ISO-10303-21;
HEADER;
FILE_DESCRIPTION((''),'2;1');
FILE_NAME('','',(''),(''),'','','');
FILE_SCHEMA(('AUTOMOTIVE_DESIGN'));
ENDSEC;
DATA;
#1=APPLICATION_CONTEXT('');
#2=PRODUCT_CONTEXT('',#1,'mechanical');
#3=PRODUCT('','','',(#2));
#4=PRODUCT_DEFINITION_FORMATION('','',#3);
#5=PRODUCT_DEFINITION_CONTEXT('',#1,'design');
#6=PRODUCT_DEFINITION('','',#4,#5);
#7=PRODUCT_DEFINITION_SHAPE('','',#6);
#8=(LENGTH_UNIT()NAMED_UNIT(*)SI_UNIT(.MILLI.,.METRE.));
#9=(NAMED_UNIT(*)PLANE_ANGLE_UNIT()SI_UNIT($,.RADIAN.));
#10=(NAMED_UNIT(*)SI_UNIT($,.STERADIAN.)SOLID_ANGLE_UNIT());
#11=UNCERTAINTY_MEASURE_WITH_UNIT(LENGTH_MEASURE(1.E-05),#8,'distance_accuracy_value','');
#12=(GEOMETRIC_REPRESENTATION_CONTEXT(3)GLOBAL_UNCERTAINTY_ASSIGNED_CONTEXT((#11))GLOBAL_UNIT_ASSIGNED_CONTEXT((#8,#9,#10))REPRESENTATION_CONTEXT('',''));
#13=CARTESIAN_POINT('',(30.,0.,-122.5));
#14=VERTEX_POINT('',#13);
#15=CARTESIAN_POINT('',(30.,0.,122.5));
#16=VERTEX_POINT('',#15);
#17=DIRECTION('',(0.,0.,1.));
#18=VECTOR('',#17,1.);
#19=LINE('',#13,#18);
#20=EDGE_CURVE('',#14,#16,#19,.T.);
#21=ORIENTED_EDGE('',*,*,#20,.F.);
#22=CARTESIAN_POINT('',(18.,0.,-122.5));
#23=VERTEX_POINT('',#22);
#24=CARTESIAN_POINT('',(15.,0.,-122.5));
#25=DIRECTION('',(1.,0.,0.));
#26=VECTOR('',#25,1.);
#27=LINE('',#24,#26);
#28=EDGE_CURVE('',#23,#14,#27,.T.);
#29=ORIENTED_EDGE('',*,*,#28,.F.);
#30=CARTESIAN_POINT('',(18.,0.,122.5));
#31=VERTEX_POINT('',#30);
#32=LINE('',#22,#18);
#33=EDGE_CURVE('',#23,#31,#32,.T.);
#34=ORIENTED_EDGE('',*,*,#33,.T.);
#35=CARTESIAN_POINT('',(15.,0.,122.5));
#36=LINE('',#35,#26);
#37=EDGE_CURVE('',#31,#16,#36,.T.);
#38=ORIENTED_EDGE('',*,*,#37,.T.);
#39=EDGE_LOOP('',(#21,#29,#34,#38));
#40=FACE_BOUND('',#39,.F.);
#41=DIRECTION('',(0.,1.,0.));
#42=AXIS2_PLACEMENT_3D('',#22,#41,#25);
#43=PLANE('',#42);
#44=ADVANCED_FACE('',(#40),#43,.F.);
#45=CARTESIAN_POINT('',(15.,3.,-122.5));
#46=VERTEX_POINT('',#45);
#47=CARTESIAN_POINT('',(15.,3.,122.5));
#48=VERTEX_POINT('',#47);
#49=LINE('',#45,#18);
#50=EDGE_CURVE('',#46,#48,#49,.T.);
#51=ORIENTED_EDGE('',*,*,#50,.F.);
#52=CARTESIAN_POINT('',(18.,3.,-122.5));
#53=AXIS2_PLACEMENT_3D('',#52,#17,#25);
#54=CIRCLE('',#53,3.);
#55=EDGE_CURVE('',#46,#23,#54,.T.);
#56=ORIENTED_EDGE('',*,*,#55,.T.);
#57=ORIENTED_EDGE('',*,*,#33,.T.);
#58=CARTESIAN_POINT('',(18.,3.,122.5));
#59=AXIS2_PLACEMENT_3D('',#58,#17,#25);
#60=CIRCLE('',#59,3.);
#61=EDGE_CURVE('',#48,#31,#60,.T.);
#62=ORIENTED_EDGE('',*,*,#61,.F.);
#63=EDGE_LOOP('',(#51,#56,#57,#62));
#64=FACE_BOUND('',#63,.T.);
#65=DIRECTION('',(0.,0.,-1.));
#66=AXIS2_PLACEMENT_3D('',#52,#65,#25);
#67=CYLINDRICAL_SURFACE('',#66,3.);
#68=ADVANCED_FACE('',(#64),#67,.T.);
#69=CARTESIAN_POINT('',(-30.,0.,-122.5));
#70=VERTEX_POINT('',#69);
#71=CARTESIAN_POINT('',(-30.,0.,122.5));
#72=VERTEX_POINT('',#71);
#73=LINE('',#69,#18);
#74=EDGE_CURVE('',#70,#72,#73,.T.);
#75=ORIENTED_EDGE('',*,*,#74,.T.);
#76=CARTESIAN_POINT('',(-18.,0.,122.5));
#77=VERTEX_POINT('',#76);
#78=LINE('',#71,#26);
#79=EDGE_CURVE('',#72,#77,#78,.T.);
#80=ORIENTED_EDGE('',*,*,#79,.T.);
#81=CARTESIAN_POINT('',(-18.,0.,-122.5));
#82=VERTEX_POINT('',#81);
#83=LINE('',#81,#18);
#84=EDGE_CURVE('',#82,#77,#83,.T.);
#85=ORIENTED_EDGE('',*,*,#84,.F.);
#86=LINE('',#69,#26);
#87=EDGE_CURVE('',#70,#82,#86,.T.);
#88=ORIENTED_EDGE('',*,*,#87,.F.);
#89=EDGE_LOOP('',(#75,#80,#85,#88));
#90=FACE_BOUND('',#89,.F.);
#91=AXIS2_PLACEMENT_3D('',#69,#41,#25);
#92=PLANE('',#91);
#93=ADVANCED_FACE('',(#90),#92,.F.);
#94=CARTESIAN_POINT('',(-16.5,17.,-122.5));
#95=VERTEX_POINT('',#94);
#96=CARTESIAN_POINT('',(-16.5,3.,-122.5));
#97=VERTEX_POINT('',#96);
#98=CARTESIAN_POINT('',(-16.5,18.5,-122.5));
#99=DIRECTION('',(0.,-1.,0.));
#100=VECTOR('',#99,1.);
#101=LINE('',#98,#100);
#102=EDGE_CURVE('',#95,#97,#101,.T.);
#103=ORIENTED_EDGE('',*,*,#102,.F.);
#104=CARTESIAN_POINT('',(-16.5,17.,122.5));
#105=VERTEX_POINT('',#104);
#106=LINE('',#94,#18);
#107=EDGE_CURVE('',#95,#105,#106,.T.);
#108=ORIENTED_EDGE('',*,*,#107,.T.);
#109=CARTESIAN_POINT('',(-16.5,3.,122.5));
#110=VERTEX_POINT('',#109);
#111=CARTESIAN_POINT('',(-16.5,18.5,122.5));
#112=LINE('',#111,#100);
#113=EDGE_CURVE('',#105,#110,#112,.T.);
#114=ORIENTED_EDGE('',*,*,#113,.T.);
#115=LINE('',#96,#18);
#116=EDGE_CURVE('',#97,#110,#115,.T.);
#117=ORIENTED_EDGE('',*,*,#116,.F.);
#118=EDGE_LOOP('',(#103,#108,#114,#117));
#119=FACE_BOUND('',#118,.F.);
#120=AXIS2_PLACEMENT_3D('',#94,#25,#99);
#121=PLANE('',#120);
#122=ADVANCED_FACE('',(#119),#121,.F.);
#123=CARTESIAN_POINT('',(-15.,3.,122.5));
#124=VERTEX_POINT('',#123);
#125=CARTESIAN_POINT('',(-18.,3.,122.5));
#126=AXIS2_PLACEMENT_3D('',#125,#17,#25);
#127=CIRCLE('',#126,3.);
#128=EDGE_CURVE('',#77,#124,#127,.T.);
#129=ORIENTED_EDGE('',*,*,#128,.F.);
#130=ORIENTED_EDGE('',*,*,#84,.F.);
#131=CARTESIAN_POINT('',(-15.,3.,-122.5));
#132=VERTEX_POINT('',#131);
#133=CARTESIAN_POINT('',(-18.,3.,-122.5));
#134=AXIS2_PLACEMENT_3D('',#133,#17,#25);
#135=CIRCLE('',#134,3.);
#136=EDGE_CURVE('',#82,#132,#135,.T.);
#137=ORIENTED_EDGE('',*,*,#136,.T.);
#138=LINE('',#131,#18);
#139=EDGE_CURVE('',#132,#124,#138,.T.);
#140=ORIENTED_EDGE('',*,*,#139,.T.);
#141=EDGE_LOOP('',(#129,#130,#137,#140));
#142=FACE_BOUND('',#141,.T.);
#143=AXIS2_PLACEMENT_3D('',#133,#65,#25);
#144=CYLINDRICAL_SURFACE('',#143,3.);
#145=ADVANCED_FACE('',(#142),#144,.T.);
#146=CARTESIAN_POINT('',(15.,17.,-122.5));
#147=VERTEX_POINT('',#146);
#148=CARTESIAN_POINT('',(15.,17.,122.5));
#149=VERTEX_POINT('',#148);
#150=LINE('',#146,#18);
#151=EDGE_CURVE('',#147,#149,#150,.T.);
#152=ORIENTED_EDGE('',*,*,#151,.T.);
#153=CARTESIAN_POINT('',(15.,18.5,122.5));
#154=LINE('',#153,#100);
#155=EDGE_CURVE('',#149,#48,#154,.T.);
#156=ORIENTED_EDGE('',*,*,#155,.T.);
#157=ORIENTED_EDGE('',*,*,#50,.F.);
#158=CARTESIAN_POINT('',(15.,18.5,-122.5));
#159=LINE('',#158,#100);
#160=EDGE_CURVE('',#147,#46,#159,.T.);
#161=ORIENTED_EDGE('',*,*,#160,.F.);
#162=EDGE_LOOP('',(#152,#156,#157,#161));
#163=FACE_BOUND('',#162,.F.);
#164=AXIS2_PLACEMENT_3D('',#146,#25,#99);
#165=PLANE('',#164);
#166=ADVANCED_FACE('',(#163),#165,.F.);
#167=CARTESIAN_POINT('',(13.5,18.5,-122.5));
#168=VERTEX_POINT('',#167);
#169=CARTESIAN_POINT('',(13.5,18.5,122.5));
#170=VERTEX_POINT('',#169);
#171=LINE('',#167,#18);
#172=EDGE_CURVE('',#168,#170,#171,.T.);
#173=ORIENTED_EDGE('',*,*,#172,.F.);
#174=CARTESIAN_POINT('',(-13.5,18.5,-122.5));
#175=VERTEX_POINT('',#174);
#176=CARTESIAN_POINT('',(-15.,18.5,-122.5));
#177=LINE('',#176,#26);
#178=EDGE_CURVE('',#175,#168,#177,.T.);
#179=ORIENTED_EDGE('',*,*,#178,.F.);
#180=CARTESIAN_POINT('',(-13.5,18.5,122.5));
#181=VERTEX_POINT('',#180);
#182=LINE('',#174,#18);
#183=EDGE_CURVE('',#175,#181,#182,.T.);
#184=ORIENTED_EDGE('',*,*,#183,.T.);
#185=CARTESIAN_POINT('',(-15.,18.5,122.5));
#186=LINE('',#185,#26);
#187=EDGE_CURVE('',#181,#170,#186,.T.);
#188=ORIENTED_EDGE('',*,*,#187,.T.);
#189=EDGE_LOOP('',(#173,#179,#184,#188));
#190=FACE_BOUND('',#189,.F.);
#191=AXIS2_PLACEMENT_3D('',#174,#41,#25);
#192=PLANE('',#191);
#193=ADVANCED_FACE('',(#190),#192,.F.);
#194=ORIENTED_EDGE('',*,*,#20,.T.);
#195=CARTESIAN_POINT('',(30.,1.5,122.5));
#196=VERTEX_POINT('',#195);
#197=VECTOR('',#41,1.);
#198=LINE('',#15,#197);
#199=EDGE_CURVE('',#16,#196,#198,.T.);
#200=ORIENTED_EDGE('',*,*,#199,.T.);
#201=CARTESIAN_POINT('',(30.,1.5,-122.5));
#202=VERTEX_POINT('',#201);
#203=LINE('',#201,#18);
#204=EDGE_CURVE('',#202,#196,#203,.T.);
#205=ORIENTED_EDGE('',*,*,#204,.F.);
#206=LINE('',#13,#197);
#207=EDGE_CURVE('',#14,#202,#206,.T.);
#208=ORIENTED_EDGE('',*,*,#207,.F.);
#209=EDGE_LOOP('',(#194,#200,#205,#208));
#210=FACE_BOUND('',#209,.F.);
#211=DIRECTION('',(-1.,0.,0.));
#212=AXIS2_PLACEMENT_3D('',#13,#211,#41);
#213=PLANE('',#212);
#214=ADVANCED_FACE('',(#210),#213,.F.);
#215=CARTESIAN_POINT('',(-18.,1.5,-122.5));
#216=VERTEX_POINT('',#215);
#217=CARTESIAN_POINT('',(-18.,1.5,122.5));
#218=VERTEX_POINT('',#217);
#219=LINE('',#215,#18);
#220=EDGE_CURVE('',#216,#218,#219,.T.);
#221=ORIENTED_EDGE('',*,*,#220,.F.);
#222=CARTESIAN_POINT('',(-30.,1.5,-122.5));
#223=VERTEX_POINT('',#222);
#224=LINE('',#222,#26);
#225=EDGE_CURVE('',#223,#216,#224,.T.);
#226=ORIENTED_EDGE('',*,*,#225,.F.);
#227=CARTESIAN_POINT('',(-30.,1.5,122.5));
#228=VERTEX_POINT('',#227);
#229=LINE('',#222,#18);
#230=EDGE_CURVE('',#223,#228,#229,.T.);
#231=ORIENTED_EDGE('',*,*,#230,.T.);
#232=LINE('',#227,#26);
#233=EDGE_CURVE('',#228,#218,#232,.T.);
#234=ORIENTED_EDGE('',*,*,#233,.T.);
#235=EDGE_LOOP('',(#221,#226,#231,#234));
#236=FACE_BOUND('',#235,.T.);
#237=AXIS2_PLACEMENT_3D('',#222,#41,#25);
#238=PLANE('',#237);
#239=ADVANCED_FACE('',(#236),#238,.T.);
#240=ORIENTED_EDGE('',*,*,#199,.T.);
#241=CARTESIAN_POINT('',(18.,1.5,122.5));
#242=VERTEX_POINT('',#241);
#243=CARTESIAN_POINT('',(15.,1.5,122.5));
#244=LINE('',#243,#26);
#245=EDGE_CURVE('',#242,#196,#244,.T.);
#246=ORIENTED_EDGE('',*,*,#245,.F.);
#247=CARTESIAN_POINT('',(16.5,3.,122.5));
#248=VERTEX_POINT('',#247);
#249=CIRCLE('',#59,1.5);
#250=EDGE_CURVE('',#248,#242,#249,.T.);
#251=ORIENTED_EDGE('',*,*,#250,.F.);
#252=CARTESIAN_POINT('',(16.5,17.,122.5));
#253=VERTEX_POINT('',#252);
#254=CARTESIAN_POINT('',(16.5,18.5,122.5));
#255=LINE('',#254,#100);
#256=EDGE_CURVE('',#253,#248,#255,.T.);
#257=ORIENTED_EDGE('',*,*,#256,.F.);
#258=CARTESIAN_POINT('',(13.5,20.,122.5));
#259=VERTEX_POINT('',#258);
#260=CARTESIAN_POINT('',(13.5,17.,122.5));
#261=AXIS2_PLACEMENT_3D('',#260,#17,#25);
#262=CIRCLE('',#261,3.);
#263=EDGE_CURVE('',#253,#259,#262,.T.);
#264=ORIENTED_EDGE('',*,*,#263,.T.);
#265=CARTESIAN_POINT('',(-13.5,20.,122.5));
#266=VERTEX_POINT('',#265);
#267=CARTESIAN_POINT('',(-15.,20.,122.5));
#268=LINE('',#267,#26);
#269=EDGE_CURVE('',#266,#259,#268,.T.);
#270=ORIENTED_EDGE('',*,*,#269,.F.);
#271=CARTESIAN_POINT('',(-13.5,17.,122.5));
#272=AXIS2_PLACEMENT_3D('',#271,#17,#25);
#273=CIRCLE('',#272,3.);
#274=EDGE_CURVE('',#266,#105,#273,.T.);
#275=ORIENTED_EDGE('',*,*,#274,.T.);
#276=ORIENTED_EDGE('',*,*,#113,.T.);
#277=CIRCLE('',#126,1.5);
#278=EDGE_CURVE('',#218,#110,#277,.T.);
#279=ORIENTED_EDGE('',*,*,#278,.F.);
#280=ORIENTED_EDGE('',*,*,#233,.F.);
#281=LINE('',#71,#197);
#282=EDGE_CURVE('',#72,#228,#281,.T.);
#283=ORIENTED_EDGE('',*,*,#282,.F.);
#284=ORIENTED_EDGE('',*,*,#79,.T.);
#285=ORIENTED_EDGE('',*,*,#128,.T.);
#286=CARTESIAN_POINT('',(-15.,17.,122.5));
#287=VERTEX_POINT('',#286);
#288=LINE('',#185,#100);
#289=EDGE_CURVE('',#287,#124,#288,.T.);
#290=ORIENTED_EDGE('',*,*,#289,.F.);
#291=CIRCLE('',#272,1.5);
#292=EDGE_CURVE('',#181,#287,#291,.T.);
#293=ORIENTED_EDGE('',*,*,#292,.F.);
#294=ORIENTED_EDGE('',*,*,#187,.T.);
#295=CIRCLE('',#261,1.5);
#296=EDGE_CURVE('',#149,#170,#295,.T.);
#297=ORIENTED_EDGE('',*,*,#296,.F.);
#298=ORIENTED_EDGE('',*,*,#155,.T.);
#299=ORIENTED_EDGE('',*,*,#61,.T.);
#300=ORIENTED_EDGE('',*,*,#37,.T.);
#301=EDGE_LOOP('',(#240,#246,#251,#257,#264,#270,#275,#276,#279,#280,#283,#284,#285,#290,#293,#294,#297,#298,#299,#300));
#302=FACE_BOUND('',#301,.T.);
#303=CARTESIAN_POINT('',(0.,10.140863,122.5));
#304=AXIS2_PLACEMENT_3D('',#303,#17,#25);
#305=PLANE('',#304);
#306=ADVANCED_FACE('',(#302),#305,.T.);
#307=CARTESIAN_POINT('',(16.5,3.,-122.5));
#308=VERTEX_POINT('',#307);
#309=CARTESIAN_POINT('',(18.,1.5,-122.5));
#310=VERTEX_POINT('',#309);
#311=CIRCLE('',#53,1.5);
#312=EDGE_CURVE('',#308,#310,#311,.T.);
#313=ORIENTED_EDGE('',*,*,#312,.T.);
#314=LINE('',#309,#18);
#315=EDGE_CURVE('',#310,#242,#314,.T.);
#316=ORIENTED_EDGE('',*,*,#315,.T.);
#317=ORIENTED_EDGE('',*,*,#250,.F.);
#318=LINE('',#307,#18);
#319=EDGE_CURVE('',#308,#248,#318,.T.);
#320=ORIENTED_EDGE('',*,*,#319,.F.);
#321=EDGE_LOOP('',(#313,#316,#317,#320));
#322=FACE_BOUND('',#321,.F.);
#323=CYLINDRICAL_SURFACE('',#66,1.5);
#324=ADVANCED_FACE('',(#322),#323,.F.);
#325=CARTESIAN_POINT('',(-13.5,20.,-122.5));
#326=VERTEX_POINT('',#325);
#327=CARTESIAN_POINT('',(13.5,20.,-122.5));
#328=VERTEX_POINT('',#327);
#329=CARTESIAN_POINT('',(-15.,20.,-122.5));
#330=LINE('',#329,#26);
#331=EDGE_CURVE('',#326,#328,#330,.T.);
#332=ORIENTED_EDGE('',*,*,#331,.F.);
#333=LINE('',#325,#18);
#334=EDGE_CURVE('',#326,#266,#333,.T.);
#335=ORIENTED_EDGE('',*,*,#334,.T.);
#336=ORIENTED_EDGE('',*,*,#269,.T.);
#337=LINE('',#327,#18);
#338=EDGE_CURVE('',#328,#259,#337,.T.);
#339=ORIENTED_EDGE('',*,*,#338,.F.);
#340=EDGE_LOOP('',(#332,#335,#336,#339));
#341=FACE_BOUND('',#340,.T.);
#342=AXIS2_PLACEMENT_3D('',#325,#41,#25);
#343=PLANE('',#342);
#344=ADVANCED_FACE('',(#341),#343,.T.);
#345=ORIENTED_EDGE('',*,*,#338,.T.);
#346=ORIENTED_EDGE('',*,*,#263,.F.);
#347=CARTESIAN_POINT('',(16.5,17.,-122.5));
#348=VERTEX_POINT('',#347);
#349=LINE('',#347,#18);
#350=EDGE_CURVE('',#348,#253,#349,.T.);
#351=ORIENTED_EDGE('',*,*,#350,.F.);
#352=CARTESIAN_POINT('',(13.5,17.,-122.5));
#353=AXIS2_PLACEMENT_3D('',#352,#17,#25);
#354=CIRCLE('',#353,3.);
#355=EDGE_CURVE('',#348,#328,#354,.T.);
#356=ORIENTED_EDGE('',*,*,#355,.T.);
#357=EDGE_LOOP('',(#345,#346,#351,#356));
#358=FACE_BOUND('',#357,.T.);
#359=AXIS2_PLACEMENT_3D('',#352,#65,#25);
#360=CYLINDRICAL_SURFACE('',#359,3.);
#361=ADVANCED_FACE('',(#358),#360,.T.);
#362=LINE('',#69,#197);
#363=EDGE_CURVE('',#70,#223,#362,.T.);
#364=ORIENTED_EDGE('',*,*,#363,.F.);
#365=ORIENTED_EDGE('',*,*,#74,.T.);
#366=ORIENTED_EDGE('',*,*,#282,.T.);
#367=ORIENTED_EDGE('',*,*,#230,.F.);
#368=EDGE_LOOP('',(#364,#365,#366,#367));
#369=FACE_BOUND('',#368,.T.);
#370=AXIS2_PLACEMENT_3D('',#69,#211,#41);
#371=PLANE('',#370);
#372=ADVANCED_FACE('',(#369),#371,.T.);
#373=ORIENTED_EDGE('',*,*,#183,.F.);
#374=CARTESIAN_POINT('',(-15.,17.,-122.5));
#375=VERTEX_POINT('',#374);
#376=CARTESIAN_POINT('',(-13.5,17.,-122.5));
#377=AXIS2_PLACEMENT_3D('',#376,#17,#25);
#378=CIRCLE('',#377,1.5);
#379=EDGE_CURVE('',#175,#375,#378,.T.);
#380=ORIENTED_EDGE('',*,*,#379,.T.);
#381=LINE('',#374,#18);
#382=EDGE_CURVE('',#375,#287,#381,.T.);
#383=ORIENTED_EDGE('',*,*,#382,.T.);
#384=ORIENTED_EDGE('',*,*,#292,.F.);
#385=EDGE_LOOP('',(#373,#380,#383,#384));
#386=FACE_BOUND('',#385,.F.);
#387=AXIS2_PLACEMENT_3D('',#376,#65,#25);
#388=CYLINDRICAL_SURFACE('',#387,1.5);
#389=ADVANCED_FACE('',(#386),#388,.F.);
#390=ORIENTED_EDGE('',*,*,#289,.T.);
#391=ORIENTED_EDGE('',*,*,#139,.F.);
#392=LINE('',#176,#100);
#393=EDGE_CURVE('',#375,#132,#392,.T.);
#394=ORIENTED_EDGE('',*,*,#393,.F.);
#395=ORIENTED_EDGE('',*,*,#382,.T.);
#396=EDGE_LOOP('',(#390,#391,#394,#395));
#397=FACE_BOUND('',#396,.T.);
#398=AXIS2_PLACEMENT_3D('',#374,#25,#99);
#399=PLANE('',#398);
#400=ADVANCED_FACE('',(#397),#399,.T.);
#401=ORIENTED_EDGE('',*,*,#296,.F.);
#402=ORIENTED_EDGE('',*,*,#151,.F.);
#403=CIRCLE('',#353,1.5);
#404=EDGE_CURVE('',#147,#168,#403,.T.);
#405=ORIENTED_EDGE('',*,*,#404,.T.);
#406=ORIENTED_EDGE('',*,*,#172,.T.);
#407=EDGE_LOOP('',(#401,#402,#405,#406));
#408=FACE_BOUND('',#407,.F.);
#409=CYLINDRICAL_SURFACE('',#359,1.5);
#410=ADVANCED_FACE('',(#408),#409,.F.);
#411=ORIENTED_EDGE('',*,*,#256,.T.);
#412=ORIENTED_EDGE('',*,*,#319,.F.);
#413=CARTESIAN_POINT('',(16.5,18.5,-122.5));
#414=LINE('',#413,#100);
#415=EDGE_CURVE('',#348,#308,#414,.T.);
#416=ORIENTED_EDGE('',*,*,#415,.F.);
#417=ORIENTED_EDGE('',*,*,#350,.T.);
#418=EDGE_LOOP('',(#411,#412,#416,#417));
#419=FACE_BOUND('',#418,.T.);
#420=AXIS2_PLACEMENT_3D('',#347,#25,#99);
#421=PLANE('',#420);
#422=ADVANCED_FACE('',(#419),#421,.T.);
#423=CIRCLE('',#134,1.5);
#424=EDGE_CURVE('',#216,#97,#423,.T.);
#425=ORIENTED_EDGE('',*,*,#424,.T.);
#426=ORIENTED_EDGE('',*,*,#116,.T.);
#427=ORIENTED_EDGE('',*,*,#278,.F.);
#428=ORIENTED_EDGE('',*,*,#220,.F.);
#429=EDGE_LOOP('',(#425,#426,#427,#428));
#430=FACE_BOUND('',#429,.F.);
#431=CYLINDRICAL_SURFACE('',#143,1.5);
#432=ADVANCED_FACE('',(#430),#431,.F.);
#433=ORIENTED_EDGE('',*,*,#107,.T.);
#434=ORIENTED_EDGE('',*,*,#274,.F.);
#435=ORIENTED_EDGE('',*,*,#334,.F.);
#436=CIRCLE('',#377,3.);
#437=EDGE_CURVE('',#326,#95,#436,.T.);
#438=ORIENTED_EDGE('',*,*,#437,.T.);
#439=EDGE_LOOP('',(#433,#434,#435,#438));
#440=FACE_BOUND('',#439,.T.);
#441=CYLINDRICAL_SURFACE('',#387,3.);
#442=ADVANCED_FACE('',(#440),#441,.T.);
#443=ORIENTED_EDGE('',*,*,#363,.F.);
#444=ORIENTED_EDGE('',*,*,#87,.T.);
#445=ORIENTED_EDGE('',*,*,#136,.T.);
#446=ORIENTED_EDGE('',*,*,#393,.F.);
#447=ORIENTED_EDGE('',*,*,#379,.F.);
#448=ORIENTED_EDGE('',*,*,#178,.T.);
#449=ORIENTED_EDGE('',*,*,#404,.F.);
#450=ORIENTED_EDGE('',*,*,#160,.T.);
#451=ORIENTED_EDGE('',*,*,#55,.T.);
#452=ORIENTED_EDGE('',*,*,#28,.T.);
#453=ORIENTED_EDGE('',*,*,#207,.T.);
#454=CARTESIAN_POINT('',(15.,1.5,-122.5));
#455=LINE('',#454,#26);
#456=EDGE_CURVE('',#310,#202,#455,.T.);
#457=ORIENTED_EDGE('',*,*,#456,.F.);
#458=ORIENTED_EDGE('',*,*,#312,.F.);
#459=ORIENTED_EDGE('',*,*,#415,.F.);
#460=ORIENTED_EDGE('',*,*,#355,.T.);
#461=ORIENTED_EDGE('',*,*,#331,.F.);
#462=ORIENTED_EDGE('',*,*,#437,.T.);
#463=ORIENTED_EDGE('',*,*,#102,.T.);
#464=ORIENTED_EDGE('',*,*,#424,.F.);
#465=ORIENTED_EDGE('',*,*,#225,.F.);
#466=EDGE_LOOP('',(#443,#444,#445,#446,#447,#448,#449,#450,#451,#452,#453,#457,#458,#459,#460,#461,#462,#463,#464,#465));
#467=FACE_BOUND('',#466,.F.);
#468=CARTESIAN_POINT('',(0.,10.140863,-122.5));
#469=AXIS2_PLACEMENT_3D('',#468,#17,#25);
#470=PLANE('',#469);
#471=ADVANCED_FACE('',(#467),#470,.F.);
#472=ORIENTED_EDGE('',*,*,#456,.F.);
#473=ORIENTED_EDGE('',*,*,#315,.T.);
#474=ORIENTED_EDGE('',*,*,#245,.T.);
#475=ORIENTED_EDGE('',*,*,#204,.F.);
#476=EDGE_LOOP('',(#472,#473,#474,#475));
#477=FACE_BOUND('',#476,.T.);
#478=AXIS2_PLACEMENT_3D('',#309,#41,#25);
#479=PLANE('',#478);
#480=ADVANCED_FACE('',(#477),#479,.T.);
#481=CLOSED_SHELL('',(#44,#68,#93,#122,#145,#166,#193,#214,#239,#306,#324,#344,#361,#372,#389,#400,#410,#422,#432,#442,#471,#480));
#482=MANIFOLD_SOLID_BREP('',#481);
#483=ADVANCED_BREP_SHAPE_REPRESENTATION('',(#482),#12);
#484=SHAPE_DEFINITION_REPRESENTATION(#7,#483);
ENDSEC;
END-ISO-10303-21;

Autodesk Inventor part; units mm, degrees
ref_plane "YZ Plane" through (0, 0, 0) normal (1, 0, 0) x (0, 1, 0)
ref_plane "XZ Plane" through (0, 0, 0) normal (0, 1, 0) x (-1, 0, 0)
ref_plane "XY Plane" through (0, 0, 0) normal (0, 0, 1) x (1, 0, 0)
sketch "Sketch1" plane through (0, 0, 0) normal (0, 0, 1) x (1, 0, 0)
  line L0 (-15, 18.5) -> (15, 18.5)
  line L1 (-15, 18.5) -> (-15, 0)
  line L2 (15, 18.5) -> (15, 0)
  line L3 (-30, 0) -> (-15, 0)
  line L4 (15, 0) -> (30, 0)
  point P0 (0, 0)
  dimension "d0" = 30
  dimension "d1" = 15
  dimension "d3" = 18.5
  dimension "d4" = 15
  dimension "d5" = 15
contour flange "Contour Flange1" sketch "Sketch1" thickness 1.5 bend radius 1.5 width 245 along (0, 0, 1) mid plane yes both sides no wall seen from (-22.5, 0, 0) lies toward (0, 1, 0) curves L3 L1 L0 L2 L4
bend "Bend1"
corner "Corner1"
equation "\"d6\" = BendReliefWidth"
equation "\"d7\" = BendReliefDepth"
equation "\"d8\" = MinimumRemnant"
equation "\"d9\" = BendRadius"
equation "\"d11\" = BendRadius"
equation "\"d13\" = CornerReliefSize"
equation "\"d14\" = GapSize"
equation "\"d15\" = JacobiRadiusSize"
equation "\"d1\" = 0.5 * d0"
equation "\"BendRadius\" = Thickness"
equation "\"BendReliefWidth\" = Thickness"
equation "\"BendReliefDepth\" = 0.5 * Thickness"
equation "\"CornerReliefSize\" = 4 * Thickness"
equation "\"MinimumRemnant\" = 2 * Thickness"
equation "\"TransitionRadius\" = BendRadius"
equation "\"JacobiRadiusSize\" = BendRadius"
equation "\"GapSize\" = Thickness"
equation "\"Thickness\" = 1.5"
properties part number "Reforço Bandeja" material "Stainless Steel AISI 304"
